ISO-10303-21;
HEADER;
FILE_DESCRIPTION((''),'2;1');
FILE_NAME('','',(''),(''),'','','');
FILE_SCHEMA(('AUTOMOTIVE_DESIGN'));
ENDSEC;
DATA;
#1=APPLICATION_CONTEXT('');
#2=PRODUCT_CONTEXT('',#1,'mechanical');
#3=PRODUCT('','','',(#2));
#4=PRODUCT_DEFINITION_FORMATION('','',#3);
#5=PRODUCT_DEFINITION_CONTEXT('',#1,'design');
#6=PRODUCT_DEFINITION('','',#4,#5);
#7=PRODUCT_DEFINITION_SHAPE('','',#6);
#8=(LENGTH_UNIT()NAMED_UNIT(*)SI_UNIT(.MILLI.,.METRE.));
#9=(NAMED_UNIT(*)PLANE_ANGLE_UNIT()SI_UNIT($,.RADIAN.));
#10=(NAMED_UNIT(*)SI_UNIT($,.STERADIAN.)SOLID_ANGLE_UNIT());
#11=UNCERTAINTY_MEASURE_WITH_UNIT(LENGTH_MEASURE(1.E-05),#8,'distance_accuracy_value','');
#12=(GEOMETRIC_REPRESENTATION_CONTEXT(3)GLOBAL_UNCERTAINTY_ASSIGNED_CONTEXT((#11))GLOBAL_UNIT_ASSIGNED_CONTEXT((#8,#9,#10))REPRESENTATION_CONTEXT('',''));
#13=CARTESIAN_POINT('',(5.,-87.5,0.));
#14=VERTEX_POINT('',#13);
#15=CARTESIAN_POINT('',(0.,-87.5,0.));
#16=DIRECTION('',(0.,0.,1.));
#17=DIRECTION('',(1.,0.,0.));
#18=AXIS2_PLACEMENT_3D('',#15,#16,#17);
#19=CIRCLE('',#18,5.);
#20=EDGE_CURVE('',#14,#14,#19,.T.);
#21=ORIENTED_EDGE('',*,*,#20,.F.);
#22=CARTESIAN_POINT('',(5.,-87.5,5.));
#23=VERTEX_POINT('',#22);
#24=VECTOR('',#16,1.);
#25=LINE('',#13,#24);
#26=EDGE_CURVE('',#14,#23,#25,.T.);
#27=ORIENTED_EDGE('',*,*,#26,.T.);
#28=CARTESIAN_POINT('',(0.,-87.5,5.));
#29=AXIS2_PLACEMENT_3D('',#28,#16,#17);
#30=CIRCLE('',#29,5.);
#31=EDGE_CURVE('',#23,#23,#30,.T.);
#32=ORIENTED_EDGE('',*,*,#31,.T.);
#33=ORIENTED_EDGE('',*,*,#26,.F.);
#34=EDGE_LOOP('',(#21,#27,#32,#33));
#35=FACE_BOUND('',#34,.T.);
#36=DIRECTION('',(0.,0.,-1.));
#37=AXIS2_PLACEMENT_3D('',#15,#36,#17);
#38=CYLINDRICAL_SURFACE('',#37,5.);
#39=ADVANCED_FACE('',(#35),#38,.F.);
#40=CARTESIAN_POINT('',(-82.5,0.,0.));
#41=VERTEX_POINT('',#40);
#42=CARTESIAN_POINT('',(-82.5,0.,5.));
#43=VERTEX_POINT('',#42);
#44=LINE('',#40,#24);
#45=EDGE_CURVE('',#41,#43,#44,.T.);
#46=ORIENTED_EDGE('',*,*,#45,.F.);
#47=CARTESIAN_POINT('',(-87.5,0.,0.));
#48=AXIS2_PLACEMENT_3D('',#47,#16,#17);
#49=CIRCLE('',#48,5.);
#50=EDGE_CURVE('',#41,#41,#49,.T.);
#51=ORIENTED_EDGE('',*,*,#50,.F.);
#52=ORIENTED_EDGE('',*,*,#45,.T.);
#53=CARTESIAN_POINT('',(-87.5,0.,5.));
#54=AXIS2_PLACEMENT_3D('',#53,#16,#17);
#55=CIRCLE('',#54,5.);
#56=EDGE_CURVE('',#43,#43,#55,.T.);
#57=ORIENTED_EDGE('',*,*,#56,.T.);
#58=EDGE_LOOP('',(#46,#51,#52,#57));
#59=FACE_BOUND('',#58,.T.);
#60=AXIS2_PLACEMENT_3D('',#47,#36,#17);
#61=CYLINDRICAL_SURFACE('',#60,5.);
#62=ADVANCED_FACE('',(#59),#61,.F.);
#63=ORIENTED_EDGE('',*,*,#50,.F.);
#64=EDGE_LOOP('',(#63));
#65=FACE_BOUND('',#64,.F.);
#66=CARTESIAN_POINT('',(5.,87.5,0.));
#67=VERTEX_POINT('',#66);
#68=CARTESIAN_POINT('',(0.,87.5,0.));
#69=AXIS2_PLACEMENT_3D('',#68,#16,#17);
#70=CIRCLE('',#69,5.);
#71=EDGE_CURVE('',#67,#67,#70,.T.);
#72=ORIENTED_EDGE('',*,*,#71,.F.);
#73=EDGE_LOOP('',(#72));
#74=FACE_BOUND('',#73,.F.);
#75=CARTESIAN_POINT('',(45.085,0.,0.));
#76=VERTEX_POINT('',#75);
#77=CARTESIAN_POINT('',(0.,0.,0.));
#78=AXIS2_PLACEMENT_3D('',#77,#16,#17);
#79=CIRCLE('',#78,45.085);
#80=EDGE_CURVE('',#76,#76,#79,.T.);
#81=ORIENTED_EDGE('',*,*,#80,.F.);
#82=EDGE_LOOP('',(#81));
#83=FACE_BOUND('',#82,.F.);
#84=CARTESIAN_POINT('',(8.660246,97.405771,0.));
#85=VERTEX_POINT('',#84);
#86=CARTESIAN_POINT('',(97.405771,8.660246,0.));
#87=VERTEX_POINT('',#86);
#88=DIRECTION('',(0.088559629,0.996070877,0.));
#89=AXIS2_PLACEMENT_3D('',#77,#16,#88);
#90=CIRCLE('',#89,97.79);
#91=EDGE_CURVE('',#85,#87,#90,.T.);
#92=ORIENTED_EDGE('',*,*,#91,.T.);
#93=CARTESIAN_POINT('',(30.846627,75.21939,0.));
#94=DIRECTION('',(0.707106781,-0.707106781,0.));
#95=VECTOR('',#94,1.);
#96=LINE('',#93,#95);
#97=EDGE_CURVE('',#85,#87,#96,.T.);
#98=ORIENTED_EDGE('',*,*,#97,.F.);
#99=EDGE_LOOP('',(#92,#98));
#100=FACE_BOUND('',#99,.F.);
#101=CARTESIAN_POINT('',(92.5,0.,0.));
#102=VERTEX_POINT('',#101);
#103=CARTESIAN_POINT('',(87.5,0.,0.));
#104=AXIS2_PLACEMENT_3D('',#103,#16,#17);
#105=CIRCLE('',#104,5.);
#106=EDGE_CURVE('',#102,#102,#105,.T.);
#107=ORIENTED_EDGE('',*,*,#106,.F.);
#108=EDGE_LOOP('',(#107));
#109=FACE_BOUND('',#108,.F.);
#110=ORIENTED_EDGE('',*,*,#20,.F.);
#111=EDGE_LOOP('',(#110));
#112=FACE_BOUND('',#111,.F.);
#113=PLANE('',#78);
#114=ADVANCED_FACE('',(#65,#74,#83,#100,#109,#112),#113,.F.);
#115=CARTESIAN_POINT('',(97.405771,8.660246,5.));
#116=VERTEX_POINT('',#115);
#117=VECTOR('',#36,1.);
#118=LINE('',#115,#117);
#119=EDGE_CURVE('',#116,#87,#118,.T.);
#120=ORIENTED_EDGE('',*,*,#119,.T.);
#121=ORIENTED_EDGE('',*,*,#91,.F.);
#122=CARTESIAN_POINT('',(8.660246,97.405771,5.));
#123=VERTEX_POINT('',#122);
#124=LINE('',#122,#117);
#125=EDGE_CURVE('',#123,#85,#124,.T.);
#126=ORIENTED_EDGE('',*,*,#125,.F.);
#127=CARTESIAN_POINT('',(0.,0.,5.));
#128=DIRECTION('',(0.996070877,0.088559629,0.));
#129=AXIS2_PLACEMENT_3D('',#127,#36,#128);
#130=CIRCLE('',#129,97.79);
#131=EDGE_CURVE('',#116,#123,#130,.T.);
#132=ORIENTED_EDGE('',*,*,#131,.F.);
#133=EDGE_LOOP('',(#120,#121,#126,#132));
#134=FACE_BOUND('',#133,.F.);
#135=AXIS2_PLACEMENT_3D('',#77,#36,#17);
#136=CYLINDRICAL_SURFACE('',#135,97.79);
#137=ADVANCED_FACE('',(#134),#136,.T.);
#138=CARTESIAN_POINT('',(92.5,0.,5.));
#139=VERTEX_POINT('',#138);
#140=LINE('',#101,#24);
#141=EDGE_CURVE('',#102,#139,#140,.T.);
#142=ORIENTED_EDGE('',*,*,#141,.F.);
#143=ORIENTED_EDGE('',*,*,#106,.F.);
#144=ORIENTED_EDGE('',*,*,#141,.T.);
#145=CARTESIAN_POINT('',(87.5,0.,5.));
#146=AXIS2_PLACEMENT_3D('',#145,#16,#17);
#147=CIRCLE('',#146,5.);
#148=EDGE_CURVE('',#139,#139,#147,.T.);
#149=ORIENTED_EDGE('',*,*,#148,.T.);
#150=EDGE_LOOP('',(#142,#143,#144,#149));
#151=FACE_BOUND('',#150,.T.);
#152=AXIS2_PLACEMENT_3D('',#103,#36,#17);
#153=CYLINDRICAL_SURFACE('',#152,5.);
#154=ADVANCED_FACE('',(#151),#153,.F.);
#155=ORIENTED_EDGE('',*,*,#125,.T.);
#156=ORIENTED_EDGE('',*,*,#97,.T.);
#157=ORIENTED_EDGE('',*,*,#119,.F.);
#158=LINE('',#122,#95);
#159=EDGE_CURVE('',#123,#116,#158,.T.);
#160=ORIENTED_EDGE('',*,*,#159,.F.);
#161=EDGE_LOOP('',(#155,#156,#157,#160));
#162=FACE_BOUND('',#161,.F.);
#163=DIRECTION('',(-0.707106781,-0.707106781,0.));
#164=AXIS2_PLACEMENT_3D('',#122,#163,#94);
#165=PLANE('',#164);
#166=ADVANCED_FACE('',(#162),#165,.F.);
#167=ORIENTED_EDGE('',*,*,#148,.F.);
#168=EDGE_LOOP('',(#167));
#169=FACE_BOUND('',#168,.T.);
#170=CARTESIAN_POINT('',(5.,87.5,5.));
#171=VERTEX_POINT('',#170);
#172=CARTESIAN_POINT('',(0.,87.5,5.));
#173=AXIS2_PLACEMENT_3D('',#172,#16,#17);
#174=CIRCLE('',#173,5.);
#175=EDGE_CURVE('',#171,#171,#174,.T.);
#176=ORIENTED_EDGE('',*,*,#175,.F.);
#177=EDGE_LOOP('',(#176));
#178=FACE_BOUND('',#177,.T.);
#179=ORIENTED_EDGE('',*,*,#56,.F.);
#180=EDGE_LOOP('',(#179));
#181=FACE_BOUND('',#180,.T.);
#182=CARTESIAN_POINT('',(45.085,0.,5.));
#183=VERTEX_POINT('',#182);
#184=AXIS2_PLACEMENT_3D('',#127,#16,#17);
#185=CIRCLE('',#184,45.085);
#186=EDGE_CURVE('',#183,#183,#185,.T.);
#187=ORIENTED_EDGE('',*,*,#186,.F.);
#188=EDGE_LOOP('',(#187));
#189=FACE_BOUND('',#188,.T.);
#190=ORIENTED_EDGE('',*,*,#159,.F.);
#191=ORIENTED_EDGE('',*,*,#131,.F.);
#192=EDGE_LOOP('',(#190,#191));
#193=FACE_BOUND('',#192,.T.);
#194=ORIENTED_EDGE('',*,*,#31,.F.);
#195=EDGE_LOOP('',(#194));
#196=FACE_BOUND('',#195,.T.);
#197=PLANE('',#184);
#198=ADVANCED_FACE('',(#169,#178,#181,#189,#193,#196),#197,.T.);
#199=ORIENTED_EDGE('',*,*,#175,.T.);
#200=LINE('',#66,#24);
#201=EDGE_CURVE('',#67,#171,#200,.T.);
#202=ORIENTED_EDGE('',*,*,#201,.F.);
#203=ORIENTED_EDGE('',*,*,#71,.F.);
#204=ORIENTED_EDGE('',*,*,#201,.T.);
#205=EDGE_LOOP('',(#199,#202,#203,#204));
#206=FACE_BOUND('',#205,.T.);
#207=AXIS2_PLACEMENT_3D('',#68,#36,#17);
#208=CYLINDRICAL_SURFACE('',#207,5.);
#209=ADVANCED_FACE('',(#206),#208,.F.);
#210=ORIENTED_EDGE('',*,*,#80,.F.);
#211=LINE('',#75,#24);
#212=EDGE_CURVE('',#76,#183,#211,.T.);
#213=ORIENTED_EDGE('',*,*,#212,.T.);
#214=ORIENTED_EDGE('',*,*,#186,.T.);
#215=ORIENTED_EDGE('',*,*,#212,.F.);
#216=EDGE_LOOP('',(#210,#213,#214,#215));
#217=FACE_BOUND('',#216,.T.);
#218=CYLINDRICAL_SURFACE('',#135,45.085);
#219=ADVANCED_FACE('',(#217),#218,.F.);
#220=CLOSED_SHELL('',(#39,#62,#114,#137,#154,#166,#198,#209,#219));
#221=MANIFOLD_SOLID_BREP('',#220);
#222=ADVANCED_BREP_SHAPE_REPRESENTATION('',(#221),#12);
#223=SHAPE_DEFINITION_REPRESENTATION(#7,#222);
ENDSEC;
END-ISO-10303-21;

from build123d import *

# Parameters (mm, degrees)
F0_R     = 97.79
F0_R_2   = 5
F0_R_3   = 45.085
F1_DEPTH = 5
F3_DEPTH = 5.001


# Not quite as in the source:
# - a feature names something its author has since deleted; it is built from what else it names


with BuildPart() as f1:
    # F0 (on Top) → F1 (new body)
    with BuildSketch(Plane.XY):
        Circle(F0_R)
        with Locations((0, -87.5)):
            Circle(F0_R_2, mode=Mode.SUBTRACT)
        with Locations((-87.5, 0)):
            Circle(F0_R_2, mode=Mode.SUBTRACT)
        Circle(F0_R_3, mode=Mode.SUBTRACT)
        with Locations((87.5, 0)):
            Circle(F0_R_2, mode=Mode.SUBTRACT)
        with Locations((0, 87.5)):
            Circle(F0_R_2, mode=Mode.SUBTRACT)
    extrude(amount=F1_DEPTH)

    # F2 (on face) → F3 (cut, through all)
    with BuildSketch(Plane.XY.offset(5)):
        with BuildLine():
            ThreePointArc((97.4057710678, 8.6602461102), (69.1479721322, 69.1479721322), (8.6602461102, 97.4057710678))
            Line((8.6602461102, 97.4057710678), (97.4057710678, 8.6602461102))
        make_face()
    extrude(amount=-F3_DEPTH, mode=Mode.SUBTRACT)


solid = f1.part
